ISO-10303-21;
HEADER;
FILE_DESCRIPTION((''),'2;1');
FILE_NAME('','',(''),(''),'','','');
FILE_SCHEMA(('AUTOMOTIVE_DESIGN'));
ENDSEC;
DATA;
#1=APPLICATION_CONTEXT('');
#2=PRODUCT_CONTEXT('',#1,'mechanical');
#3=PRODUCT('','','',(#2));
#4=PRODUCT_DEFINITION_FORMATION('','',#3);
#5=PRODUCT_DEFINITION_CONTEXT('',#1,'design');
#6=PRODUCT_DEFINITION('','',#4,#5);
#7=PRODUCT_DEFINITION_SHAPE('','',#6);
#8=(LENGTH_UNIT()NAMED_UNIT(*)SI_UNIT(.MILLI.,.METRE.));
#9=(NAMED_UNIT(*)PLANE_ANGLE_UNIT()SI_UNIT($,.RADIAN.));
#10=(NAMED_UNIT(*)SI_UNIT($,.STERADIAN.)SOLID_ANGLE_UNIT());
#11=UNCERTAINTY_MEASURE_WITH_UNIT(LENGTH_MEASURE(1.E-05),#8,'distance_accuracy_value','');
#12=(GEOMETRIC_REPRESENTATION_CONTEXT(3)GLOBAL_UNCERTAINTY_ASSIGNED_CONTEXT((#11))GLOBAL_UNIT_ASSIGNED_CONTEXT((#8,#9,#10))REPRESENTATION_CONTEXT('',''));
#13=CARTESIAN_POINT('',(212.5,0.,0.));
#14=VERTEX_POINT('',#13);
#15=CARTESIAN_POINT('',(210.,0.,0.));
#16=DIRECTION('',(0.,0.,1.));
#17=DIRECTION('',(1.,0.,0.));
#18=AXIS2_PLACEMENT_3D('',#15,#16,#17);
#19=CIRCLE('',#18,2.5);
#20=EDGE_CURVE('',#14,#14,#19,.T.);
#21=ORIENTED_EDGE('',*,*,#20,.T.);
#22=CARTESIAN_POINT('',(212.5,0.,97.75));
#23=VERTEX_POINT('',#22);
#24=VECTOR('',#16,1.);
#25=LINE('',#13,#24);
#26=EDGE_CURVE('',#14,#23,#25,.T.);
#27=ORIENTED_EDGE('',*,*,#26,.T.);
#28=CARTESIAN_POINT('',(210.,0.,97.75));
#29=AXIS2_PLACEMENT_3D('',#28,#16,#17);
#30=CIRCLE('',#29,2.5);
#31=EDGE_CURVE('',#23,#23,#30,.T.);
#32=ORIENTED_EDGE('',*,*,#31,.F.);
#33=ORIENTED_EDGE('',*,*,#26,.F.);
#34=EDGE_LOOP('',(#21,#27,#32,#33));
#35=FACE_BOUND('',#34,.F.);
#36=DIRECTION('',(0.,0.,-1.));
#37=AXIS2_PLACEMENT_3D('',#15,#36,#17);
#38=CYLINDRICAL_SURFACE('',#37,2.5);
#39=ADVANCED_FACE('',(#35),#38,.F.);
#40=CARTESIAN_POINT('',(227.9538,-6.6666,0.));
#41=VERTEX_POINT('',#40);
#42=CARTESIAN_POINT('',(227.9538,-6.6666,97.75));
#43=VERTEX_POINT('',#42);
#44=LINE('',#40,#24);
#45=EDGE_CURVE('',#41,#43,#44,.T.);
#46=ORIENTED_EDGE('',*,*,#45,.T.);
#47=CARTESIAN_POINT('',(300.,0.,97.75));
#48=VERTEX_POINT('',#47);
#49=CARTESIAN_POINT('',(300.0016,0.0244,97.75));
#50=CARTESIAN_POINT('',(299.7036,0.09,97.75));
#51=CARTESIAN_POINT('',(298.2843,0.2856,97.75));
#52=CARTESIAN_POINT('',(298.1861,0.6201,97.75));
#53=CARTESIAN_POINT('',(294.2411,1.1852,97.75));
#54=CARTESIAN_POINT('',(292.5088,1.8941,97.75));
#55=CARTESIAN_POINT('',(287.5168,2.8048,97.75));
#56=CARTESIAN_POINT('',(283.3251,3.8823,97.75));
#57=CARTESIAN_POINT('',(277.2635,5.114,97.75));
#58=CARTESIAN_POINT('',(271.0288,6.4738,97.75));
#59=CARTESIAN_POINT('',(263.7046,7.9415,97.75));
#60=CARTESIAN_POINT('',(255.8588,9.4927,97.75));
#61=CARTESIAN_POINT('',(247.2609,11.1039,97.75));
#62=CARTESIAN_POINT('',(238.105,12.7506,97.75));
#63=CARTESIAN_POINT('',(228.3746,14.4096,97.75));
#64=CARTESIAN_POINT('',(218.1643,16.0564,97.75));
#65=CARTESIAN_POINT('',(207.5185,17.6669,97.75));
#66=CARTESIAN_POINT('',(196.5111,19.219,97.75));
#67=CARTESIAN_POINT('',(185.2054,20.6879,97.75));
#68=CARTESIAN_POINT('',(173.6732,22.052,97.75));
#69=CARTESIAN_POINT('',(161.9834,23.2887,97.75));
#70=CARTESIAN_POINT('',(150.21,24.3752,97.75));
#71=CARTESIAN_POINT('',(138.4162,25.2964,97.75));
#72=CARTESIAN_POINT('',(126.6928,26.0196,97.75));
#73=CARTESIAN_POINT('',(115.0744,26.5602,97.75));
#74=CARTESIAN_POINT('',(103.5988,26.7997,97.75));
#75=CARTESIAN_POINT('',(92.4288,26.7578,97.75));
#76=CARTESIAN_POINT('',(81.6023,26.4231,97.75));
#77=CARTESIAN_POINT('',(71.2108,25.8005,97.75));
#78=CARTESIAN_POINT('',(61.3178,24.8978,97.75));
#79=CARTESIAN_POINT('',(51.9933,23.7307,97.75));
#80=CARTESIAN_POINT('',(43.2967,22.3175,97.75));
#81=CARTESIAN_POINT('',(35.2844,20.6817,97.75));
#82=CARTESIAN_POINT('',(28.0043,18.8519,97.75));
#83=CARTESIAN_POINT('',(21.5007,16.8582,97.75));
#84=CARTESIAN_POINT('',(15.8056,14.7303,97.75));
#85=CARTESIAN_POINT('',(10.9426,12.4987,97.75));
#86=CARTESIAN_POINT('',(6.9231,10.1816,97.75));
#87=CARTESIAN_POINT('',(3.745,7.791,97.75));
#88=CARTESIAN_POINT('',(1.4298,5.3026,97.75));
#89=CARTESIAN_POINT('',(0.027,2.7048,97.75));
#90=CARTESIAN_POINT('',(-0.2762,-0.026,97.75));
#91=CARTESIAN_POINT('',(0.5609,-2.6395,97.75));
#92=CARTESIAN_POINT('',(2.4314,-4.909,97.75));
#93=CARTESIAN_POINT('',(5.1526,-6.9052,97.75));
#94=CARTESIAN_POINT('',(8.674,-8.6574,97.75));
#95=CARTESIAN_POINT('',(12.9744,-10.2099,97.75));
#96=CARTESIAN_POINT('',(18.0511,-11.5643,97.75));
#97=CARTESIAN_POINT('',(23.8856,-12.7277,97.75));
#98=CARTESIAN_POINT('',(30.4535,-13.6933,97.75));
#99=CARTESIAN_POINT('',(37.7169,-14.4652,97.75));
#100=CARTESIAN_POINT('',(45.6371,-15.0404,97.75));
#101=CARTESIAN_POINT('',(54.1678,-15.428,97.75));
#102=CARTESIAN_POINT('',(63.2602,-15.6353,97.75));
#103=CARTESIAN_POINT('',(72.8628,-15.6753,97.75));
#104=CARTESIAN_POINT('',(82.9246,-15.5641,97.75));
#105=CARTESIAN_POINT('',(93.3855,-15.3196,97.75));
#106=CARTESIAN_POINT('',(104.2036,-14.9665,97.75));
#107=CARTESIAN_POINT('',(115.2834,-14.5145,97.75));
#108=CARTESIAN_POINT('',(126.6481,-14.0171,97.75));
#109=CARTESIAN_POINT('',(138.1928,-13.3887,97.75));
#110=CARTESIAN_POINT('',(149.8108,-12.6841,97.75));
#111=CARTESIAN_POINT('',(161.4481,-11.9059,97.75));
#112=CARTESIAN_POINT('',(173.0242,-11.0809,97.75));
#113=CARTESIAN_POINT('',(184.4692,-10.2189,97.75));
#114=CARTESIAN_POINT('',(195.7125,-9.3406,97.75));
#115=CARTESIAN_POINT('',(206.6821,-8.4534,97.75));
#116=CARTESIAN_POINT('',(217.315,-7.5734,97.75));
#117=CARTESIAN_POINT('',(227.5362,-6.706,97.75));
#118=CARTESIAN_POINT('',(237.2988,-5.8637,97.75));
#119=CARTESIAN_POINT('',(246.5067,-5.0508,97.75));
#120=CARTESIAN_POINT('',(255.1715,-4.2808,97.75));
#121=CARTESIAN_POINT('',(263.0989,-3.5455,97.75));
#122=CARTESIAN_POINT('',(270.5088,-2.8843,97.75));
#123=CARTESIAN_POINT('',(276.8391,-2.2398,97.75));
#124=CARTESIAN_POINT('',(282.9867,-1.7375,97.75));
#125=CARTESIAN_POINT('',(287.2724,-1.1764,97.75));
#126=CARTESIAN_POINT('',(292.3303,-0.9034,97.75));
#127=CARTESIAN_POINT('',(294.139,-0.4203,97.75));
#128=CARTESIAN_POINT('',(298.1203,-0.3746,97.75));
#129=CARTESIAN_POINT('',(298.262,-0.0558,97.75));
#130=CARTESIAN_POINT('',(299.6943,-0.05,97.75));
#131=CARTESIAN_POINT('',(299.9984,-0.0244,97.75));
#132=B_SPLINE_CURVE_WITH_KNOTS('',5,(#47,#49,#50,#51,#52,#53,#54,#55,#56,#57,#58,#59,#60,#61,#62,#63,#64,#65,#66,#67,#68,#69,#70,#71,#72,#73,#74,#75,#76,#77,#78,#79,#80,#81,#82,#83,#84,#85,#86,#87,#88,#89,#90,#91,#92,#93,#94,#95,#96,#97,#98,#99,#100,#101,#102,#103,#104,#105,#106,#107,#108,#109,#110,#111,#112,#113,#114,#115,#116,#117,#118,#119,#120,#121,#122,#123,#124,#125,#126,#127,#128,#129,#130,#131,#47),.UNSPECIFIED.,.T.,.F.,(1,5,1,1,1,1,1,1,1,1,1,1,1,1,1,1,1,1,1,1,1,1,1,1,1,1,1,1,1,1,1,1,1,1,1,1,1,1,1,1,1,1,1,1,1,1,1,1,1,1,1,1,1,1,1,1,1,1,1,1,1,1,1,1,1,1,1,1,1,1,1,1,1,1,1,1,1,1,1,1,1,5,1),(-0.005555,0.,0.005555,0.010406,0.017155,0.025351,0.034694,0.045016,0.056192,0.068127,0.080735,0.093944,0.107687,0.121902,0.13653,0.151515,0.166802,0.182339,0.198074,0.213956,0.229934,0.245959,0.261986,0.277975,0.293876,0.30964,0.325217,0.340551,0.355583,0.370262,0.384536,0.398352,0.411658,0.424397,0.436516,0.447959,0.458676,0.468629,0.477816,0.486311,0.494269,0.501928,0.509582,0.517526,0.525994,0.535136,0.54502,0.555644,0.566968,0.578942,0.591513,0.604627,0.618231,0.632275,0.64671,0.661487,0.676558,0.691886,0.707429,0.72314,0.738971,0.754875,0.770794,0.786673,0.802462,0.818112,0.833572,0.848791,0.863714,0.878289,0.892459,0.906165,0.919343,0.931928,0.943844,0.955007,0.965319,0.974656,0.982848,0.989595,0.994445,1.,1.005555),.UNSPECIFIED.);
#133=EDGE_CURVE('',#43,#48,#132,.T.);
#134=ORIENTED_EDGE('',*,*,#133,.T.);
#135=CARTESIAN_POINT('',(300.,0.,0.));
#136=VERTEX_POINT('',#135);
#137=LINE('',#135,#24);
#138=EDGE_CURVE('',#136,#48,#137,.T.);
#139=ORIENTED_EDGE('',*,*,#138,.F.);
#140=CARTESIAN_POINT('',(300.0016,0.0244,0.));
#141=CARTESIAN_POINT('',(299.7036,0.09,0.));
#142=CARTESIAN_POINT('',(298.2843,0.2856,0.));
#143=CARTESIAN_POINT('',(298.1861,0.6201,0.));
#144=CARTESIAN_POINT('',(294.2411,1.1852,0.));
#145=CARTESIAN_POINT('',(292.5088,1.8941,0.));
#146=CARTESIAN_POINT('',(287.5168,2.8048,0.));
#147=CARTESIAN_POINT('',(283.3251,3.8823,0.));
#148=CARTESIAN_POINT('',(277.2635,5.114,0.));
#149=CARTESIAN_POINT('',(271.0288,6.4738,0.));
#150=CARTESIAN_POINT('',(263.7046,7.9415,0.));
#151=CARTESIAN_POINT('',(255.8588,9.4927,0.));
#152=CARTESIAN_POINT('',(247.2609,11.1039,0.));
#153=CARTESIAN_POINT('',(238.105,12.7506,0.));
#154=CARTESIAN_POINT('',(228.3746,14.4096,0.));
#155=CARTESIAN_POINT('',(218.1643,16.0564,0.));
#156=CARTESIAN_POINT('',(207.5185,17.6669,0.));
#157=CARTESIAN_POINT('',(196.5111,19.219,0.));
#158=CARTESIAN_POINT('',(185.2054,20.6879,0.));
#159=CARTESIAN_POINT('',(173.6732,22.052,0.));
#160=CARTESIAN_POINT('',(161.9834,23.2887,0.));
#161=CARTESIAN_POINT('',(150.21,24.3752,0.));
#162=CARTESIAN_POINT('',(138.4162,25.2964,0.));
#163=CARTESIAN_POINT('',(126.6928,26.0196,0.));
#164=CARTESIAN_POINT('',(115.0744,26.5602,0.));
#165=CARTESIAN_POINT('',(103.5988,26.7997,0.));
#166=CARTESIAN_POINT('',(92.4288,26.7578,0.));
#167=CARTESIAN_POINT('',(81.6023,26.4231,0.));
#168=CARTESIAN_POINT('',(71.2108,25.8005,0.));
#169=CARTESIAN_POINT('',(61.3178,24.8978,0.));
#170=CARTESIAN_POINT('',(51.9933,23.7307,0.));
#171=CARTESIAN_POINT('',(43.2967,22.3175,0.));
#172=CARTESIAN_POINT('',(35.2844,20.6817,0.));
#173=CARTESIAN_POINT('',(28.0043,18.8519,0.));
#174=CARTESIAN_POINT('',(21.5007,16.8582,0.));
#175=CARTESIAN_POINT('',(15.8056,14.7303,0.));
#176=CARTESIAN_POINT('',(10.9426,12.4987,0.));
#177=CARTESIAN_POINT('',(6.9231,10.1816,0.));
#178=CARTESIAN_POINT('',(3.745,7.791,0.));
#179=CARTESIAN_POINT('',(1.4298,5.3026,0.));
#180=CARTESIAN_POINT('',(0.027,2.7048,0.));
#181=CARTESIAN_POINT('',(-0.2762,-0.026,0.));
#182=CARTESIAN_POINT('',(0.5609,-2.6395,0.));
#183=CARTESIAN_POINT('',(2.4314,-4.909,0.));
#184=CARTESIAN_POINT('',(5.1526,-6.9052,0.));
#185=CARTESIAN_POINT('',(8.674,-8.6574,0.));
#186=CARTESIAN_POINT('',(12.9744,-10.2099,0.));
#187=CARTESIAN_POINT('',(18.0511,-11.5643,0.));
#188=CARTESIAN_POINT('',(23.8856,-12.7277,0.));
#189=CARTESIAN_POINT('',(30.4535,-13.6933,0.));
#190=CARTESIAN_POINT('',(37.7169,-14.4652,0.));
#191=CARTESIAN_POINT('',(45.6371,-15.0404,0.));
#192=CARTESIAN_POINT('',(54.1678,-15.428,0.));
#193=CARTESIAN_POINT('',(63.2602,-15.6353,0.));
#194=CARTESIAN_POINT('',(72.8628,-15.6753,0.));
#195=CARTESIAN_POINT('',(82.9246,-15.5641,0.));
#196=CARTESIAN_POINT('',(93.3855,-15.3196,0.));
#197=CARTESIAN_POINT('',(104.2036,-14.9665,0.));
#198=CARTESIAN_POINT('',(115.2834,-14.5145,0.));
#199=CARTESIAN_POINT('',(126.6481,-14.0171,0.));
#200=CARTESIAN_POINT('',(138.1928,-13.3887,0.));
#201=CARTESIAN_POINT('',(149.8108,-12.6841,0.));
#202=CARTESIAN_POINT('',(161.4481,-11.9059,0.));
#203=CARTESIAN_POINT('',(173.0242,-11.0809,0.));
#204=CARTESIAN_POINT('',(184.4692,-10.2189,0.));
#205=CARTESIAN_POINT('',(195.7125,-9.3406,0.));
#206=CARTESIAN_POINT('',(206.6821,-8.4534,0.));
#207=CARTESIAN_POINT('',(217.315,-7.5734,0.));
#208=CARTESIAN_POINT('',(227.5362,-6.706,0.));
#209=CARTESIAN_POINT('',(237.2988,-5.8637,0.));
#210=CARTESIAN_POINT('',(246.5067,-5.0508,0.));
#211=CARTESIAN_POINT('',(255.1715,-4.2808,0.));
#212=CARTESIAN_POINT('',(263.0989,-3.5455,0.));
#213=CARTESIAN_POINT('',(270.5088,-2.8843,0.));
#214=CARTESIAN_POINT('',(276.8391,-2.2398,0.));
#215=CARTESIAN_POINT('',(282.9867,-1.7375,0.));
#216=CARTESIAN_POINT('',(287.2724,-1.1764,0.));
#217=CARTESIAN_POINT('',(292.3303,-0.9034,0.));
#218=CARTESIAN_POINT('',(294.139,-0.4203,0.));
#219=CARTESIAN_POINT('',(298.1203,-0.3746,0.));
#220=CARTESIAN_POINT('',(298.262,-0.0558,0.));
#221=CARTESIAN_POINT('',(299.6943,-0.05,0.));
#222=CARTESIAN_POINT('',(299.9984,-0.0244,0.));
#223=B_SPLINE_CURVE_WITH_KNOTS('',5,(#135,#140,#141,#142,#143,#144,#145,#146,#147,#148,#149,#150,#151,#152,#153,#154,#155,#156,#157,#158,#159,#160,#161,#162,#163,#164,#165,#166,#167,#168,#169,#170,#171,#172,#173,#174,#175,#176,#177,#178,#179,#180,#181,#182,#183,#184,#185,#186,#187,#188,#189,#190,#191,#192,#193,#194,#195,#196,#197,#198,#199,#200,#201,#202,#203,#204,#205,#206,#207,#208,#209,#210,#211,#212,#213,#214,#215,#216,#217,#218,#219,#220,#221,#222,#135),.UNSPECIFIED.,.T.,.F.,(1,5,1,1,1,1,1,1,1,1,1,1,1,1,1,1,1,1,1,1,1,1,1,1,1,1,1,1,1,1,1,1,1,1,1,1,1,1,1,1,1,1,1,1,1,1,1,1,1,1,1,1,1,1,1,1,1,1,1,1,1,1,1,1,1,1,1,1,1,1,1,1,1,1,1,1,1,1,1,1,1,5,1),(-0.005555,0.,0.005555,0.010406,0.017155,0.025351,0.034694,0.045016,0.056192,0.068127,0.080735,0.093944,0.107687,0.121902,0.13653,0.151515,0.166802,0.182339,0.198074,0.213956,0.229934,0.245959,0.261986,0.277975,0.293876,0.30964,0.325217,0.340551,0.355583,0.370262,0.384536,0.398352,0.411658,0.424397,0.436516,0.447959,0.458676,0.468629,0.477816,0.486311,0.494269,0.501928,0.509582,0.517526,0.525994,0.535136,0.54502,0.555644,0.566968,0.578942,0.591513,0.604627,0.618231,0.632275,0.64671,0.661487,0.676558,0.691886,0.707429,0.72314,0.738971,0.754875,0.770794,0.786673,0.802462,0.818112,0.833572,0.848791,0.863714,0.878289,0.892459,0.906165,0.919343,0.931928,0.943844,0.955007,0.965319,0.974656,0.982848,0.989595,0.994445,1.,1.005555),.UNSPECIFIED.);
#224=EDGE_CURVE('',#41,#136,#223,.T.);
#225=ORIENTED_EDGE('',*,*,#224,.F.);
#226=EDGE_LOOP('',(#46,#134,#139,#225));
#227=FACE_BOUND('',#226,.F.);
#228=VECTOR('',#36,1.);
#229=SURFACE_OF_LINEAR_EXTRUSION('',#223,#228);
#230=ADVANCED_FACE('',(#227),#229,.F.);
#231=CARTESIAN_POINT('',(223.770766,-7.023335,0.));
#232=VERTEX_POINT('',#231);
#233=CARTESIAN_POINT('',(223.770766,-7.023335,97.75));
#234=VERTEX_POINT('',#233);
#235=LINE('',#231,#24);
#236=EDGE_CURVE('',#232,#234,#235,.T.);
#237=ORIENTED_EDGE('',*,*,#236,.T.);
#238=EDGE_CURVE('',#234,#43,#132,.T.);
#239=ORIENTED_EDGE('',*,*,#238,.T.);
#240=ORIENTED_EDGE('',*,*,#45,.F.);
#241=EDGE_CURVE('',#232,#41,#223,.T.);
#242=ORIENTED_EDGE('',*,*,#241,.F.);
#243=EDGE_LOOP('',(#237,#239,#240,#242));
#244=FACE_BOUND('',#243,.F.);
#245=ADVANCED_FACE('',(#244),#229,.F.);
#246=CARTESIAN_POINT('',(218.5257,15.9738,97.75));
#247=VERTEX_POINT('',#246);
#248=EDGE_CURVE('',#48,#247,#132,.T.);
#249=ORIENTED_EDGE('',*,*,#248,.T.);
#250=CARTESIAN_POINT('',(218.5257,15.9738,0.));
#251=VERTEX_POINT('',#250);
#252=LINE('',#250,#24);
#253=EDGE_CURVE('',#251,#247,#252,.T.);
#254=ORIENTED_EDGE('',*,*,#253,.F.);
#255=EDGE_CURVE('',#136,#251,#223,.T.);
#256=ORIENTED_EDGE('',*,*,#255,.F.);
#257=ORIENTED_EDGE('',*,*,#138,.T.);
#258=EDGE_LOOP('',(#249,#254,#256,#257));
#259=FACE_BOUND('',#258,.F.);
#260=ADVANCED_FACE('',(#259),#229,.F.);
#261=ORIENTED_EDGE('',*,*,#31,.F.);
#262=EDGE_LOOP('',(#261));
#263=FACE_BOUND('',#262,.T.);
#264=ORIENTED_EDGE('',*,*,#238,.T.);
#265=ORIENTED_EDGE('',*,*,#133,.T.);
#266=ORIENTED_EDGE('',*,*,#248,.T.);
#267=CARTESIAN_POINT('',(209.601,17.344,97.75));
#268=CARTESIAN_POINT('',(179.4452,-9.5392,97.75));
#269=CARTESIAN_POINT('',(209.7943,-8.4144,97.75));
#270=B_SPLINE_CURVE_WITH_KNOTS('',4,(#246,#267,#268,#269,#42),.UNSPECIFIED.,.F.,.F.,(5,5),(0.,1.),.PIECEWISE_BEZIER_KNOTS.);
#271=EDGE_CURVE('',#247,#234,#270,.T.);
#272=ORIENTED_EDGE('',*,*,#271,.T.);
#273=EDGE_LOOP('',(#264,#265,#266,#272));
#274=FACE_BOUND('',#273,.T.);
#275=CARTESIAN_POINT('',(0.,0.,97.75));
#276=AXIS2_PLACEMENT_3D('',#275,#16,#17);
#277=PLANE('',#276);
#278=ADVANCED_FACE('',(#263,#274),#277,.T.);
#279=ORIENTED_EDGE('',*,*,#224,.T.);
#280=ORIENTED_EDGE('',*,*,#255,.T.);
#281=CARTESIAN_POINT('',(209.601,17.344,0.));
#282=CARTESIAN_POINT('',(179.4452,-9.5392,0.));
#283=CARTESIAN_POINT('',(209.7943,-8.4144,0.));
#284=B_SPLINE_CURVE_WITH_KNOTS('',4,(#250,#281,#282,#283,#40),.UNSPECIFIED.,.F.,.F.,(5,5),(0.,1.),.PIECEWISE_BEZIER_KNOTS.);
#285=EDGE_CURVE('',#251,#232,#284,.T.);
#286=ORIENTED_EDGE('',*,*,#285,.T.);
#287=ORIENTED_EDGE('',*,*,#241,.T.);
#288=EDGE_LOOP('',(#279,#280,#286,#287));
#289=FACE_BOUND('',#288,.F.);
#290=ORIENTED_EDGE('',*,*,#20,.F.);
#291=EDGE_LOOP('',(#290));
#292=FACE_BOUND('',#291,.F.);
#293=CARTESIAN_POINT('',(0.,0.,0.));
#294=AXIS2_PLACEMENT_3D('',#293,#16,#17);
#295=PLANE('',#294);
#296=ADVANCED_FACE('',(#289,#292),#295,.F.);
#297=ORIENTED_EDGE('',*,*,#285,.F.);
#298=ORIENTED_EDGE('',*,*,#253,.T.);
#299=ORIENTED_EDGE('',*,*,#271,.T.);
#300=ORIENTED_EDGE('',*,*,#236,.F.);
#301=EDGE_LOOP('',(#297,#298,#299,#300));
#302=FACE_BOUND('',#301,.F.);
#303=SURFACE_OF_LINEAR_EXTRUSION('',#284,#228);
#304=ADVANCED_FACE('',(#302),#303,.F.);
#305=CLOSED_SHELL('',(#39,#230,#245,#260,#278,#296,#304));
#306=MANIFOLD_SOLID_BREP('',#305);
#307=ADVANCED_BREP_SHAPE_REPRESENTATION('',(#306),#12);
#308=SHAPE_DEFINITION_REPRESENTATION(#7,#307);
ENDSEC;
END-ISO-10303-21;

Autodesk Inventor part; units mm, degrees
ref_plane "YZ Plane" through (0, 0, 0) normal (1, 0, 0) x (0, 1, 0)
ref_plane "XZ Plane" through (0, 0, 0) normal (0, 1, 0) x (-1, 0, 0)
ref_plane "XY Plane" through (0, 0, 0) normal (0, 0, 1) x (1, 0, 0)
sketch "Sketch1" plane through (0, 0, 0) normal (0, 0, 1) x (1, 0, 0)
  spline S0 degree 5 poles (300, 0) (300.0016, 0.0244) (299.7036, 0.09) (298.2843, 0.2856) (298.1861, 0.6201) (294.2411, 1.1852) (292.5088, 1.8941) (287.5168, 2.8048) (283.3251, 3.8823) (277.2635, 5.114) (271.0288, 6.4738) (263.7046, 7.9415) (255.8588, 9.4927) (247.2609, 11.1039) (238.105, 12.7506) (228.3746, 14.4096) (218.1643, 16.0564) (207.5185, 17.6669) (196.5111, 19.219) (185.2054, 20.6879) (173.6732, 22.052) (161.9834, 23.2887) (150.21, 24.3752) (138.4162, 25.2964) (126.6928, 26.0196) (115.0744, 26.5602) (103.5988, 26.7997) (92.4288, 26.7578) (81.6023, 26.4231) (71.2108, 25.8005) (61.3178, 24.8978) (51.9933, 23.7307) (43.2967, 22.3175) (35.2844, 20.6817) (28.0043, 18.8519) (21.5007, 16.8582) (15.8056, 14.7303) (10.9426, 12.4987) (6.9231, 10.1816) (3.745, 7.791) (1.4298, 5.3026) (0.027, 2.7048) (-0.2762, -0.026) (0.5609, -2.6395) (2.4314, -4.909) (5.1526, -6.9052) (8.674, -8.6574) (12.9744, -10.2099) (18.0511, -11.5643) (23.8856, -12.7277) (30.4535, -13.6933) (37.7169, -14.4652) (45.6371, -15.0404) (54.1678, -15.428) (63.2602, -15.6353) (72.8628, -15.6753) (82.9246, -15.5641) (93.3855, -15.3196) (104.2036, -14.9665) (115.2834, -14.5145) (126.6481, -14.0171) (138.1928, -13.3887) (149.8108, -12.6841) (161.4481, -11.9059) (173.0242, -11.0809) (184.4692, -10.2189) (195.7125, -9.3406) (206.6821, -8.4534) (217.315, -7.5734) (227.5362, -6.706) (237.2988, -5.8637) (246.5067, -5.0508) (255.1715, -4.2808) (263.0989, -3.5455) (270.5088, -2.8843) (276.8391, -2.2398) (282.9867, -1.7375) (287.2724, -1.1764) (292.3303, -0.9034) (294.139, -0.4203) (298.1203, -0.3746) (298.262, -0.0558) (299.6943, -0.05) (299.9984, -0.0244) (300, 0) knots 0 0 0 0 0 0 0.005555 0.010406 0.017155 0.025351 0.034694 0.045016 0.056192 0.068127 0.080735 0.093944 0.107687 0.121902 0.13653 0.151515 0.166802 0.182339 0.198074 0.213956 0.229934 0.245959 0.261986 0.277975 0.293876 0.30964 0.325217 0.340551 0.355583 0.370262 0.384536 0.398352 0.411658 0.424397 0.436516 0.447959 0.458676 0.468629 0.477816 0.486311 0.494269 0.501928 0.509582 0.517526 0.525994 0.535136 0.54502 0.555644 0.566968 0.578942 0.591513 0.604627 0.618231 0.632275 0.64671 0.661487 0.676558 0.691886 0.707429 0.72314 0.738971 0.754875 0.770794 0.786673 0.802462 0.818112 0.833572 0.848791 0.863714 0.878289 0.892459 0.906165 0.919343 0.931928 0.943844 0.955007 0.965319 0.974656 0.982848 0.989595 0.994445 1 1 1 1 1 1
  line L0 (200, 103) -> (200, -97) construction
  line L1 (0, -164.4758) -> (0, 307.8549) construction
  line L2 (210, 0) -> (210, -12) construction
  line L3 (210, 0) -> (222, 0) construction
  spline S1 degree 4 poles (218.5257, 15.9738) (209.601, 17.344) (179.4452, -9.5392) (209.7943, -8.4144) (227.9538, -6.6666) knots 0 0 0 0 0 1 1 1 1 1
  line L4 (221.1774, 15.5667) -> (215.874, 16.3809) construction
  arc A0 (220.2542, 15.1852) -> (216.6402, 15.74) centre (217.9961, 12.5243) ccw construction
  line L5 (222.2571, -7.2149) -> (233.6505, -6.1183) construction
  arc A1 (223.3931, -7.0631) -> (232.5064, -6.186) centre (204.1762, 240.3791) ccw construction
  circle A2 centre (210, 0) radius 2.5
  point P0 (0, 0)
  point P1 (298.1739, 0.4338)
  point P2 (295.9008, 0.9681)
  point P3 (292.7367, 1.7025)
  point P4 (288.6996, 2.6229)
  point P5 (283.8129, 3.7134)
  point P6 (278.1048, 4.9545)
  point P7 (271.6086, 6.3255)
  point P8 (264.3621, 7.8039)
  point P9 (256.4085, 9.3663)
  point P10 (247.7946, 10.9887)
  point P11 (238.572, 12.6468)
  point P12 (228.7959, 14.3166)
  point P13 (207.8235, 17.5944)
  point P14 (196.755, 19.155)
  point P15 (185.388, 20.6319)
  point P16 (173.7924, 22.0023)
  point P17 (162.0405, 23.2434)
  point P18 (150.2055, 24.3336)
  point P19 (138.3615, 25.2522)
  point P20 (126.5832, 25.98)
  point P21 (114.8976, 26.493)
  point P22 (103.3635, 26.7315)
  point P23 (92.1183, 26.6775)
  point P24 (81.2367, 26.3292)
  point P25 (70.7922, 25.689)
  point P26 (60.8541, 24.7656)
  point P27 (51.489, 23.5734)
  point P28 (42.7587, 22.131)
  point P29 (34.7199, 20.4618)
  point P30 (27.4239, 18.5934)
  point P31 (20.9172, 16.5555)
  point P32 (15.2385, 14.379)
  point P33 (10.422, 12.0954)
  point P34 (6.4944, 9.7347)
  point P35 (3.4767, 7.3239)
  point P36 (1.3836, 4.8867)
  point P37 (0.2238, 2.4411)
  point P38 (0, 0)
  point P39 (0.7011, -2.3487)
  point P40 (2.31, -4.5201)
  point P41 (4.8123, -6.5094)
  point P42 (8.1885, -8.3112)
  point P43 (12.414, -9.9204)
  point P44 (17.4594, -11.3319)
  point P45 (23.2908, -12.5418)
  point P46 (29.871, -13.5477)
  point P47 (37.1583, -14.3505)
  point P48 (45.1092, -14.9526)
  point P49 (53.6766, -15.3609)
  point P50 (62.8101, -15.5853)
  point P51 (72.4581, -15.639)
  point P52 (82.566, -15.5385)
  point P53 (93.0768, -15.3033)
  point P54 (103.9314, -14.9544)
  point P55 (115.0689, -14.514)
  point P56 (126.4866, -13.9956)
  point P57 (138.1008, -13.3755)
  point P58 (149.7945, -12.6672)
  point P59 (161.4972, -11.8896)
  point P60 (173.1378, -11.061)
  point P61 (184.6455, -10.1973)
  point P62 (195.9501, -9.3141)
  point P63 (206.9814, -8.4237)
  point P64 (217.6716, -7.5381)
  point P65 (227.9538, -6.6666)
  point P66 (237.7638, -5.8185)
  point P67 (247.0398, -5.0019)
  point P68 (255.7236, -4.2234)
  point P69 (263.7597, -3.4905)
  point P70 (271.0965, -2.8098)
  point P71 (277.6872, -2.1882)
  point P72 (283.4889, -1.6323)
  point P73 (288.4641, -1.1487)
  point P74 (292.5804, -0.7434)
  point P75 (295.8102, -0.4221)
  point P76 (298.1328, -0.1887)
  point P77 (299.5323, -0.0474)
  point P78 (200, 0)
  point P79 (223.7705, -7.0234)
  dimension "d0" = 200
  dimension "d2" = 200
  dimension "d3" = 12
  dimension "d4" = 90
  dimension "d5" = 10
  dimension "d17" = 5
extrude "Extrusion2" add sketch "Sketch1" along normal blind 97.75 contours S0 S1 picked at (264.3061, 0.3433)
properties part number "4P.01.01.01-TW-v1-Flap Shape Definition"
